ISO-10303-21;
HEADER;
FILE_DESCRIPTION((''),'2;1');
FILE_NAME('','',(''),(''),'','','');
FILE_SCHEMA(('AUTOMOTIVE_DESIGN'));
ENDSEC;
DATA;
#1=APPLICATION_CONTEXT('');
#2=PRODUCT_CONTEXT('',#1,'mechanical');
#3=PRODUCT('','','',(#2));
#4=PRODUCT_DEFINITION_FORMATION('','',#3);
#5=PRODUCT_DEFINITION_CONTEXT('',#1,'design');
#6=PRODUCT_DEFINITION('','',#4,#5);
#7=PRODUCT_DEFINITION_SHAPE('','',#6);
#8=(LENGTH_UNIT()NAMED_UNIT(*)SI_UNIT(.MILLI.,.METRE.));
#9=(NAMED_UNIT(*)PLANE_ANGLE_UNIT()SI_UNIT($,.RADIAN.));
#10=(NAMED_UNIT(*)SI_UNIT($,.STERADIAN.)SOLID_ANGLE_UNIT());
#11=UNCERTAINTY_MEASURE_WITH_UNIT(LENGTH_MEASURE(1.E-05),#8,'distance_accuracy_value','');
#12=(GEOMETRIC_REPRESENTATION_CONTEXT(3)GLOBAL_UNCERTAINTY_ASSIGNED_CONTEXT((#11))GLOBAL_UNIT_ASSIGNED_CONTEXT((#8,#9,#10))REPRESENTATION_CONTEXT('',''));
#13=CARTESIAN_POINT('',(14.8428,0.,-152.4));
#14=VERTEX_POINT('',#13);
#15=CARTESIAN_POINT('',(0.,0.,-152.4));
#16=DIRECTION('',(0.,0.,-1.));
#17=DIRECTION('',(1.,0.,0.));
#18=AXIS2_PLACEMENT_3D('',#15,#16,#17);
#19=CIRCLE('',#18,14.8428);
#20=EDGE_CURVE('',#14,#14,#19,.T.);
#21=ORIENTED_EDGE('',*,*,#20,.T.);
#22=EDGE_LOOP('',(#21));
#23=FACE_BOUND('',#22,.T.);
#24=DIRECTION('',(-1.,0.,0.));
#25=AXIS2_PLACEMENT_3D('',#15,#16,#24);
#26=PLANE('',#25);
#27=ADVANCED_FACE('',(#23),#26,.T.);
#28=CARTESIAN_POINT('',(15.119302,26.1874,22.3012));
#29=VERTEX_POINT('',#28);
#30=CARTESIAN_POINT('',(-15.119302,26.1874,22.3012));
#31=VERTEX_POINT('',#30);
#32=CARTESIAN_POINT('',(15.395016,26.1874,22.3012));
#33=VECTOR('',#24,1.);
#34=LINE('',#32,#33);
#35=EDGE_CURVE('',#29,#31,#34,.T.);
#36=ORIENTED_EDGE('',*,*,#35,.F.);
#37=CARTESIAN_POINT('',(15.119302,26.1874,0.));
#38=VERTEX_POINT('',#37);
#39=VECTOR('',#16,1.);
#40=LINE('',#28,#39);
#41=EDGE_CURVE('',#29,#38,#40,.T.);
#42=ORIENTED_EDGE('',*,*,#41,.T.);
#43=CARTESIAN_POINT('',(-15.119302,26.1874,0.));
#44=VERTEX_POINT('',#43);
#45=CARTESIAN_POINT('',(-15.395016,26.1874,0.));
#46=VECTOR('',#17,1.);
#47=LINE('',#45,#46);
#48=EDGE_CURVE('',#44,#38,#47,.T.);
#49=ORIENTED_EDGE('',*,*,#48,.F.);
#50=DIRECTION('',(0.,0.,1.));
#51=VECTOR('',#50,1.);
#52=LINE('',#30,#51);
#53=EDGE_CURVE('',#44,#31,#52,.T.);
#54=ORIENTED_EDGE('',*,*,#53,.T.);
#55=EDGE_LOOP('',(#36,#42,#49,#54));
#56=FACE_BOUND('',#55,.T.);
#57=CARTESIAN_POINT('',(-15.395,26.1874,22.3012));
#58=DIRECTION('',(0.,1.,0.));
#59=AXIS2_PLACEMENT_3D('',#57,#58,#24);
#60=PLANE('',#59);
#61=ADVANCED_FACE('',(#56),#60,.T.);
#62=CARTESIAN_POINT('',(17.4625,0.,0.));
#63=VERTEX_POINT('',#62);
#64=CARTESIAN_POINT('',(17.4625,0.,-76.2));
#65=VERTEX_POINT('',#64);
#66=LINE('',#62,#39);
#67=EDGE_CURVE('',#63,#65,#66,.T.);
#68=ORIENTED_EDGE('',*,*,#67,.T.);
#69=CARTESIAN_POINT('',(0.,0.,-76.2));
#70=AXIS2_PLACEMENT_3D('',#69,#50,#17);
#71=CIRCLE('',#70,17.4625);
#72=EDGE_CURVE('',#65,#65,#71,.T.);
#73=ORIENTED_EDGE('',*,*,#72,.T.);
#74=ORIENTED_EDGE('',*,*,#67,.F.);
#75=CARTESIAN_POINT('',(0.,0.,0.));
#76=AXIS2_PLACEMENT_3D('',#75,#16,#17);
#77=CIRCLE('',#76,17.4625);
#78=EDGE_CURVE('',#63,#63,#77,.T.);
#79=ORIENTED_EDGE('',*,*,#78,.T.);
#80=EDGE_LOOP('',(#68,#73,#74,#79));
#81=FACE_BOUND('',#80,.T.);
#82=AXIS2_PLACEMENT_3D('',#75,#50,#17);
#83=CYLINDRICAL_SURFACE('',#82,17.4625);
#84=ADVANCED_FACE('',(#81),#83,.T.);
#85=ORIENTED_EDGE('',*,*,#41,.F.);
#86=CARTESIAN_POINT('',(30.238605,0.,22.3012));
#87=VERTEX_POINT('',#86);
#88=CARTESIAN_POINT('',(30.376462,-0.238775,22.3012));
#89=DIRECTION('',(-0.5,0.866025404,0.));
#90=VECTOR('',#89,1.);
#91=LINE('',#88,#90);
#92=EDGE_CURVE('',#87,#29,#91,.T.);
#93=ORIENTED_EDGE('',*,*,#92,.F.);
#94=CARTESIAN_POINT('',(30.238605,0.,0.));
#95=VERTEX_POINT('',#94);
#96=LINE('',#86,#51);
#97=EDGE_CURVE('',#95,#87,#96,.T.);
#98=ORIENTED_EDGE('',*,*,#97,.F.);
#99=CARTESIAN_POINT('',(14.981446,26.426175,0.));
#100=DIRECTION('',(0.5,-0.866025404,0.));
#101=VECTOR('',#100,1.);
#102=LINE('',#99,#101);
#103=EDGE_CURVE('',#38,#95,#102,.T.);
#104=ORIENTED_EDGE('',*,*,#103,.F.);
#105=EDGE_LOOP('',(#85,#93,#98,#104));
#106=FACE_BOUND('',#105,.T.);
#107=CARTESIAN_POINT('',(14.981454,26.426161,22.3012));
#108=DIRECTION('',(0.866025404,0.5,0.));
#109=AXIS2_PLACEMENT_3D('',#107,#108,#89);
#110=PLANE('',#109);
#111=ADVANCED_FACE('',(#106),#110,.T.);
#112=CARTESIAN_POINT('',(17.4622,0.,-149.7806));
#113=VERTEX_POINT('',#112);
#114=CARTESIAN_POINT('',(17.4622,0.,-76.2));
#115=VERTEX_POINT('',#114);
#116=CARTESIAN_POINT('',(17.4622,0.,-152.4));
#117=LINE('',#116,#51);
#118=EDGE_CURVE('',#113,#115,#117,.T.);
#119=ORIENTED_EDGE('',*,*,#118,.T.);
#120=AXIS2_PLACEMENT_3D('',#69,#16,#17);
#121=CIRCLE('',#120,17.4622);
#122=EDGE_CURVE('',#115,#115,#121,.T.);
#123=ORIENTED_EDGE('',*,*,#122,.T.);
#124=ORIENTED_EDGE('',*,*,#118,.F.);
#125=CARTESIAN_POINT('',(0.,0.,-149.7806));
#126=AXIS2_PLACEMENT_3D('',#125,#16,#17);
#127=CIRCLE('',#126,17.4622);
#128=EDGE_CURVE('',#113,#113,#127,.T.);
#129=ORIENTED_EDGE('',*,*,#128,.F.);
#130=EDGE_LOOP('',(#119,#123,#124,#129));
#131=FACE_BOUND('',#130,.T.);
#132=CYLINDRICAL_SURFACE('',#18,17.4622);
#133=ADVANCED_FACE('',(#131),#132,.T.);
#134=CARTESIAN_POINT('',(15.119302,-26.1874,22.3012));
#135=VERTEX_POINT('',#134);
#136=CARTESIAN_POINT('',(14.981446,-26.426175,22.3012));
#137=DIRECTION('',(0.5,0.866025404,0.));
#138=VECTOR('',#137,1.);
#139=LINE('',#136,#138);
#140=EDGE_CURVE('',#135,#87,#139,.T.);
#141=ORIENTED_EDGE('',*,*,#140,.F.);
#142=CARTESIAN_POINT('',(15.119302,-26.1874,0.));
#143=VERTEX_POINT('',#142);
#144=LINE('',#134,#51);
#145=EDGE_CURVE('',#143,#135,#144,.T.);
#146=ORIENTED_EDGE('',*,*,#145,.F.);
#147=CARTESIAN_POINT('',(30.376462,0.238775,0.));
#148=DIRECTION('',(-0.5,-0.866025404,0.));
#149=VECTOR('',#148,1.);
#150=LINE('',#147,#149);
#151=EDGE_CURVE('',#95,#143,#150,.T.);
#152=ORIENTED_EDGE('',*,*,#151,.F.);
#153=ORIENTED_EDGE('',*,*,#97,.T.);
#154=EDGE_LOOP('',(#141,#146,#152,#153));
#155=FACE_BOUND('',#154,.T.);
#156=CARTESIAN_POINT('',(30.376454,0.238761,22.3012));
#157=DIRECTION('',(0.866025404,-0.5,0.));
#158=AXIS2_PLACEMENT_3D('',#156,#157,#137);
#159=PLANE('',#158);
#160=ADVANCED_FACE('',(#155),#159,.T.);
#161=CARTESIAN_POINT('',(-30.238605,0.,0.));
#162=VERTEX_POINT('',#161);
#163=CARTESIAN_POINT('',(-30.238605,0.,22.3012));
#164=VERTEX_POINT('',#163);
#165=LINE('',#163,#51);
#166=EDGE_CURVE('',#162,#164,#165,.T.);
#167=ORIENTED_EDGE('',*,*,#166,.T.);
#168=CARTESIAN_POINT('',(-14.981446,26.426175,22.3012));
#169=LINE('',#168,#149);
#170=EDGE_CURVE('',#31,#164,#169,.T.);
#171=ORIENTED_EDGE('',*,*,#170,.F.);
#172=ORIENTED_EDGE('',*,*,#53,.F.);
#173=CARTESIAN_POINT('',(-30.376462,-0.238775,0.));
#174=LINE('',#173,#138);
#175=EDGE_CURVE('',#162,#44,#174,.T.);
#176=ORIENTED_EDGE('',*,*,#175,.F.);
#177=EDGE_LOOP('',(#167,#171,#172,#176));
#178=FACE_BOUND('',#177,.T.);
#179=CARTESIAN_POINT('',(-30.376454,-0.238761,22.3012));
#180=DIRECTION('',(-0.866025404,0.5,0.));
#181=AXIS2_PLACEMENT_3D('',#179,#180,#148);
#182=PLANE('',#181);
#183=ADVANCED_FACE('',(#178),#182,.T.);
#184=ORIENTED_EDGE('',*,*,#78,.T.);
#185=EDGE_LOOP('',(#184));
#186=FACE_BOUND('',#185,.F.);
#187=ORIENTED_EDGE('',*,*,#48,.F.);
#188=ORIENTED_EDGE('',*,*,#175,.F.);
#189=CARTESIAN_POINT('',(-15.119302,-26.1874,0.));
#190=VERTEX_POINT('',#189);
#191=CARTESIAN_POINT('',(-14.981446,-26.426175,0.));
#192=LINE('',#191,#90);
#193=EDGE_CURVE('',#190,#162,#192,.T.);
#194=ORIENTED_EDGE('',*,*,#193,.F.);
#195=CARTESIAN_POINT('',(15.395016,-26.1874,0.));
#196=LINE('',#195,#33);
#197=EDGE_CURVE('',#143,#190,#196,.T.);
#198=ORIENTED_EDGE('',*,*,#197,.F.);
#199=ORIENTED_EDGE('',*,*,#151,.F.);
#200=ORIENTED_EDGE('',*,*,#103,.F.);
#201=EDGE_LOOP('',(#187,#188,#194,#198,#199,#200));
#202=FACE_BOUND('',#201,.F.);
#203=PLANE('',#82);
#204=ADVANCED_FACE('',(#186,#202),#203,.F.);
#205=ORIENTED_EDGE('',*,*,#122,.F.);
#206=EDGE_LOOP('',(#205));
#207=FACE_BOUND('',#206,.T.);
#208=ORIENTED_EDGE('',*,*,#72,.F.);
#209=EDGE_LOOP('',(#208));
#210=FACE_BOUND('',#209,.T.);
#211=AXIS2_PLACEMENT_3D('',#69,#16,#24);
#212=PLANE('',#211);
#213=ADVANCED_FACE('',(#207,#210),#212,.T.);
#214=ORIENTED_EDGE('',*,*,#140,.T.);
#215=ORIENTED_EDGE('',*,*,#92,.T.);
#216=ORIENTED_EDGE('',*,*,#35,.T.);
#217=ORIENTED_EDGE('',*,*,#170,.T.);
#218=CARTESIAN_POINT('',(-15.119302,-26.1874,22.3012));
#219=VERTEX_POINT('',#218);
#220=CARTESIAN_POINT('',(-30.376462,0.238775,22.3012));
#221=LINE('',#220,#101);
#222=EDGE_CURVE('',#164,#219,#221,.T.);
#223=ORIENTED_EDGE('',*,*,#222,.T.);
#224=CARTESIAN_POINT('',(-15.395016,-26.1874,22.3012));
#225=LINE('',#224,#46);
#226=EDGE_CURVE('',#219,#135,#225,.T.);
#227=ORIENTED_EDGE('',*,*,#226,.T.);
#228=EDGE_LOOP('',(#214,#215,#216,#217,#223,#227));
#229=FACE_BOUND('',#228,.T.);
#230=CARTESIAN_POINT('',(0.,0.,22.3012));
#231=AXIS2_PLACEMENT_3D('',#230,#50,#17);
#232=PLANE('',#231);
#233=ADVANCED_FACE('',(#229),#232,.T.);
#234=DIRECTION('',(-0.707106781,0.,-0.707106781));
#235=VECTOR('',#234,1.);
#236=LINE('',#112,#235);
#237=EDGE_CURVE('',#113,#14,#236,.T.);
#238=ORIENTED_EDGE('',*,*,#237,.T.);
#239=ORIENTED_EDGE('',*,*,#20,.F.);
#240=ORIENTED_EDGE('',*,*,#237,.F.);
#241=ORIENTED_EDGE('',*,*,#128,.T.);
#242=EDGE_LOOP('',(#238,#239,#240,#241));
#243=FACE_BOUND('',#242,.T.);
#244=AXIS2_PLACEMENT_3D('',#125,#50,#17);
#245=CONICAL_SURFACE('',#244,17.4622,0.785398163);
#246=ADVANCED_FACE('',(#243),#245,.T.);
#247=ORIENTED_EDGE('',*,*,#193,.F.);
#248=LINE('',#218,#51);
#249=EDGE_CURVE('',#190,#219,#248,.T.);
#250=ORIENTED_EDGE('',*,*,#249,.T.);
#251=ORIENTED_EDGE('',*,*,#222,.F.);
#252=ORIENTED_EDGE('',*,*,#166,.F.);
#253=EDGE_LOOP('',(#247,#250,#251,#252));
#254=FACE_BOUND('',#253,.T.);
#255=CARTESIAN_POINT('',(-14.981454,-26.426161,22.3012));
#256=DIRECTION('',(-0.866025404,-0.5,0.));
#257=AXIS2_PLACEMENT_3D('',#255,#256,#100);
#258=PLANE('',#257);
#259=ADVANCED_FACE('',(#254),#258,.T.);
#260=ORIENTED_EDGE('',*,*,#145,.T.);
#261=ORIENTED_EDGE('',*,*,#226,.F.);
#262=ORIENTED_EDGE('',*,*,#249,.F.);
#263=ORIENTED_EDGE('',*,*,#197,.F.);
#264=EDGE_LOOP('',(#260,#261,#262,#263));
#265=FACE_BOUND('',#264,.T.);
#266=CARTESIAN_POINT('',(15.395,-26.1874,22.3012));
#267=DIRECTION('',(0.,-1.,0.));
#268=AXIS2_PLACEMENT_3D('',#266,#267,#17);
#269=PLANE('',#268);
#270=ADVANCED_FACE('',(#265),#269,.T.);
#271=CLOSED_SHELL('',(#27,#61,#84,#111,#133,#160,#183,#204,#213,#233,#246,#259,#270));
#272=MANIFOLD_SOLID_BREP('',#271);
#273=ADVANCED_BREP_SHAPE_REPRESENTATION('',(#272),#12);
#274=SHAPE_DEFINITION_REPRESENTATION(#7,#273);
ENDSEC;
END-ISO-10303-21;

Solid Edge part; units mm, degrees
sketch "Sketch1" plane through (0, 0, 0) normal (0, 0, 1) x (1, 0, 0)
  circle A0 centre (0, 0) radius 30.3774
  dimension "D1" = 60.7548
extrude "Protrusion1" add sketch "Sketch1" along normal blind 22.3012
sketch "Sketch2" plane through (0, 0, 0) normal (0, 0, -1) x (1, 0, 0)
  circle A0 centre (0, 0) radius 17.4625
extrude "Protrusion2" add sketch "Sketch2" along normal blind 152.4
sketch "Sketch3" plane through (0, 0, -152.4) normal (0, 0, -1) x (1, 0, 0)
  circle A0 centre (0, 0) radius 17.4622
extrude "Cutout1" cut sketch "Sketch3" against normal blind 76.2 flip side to cut
chamfer "Chamfer_1" distance 2.6194 angle 45 1 edges at (-17.4622, 0, -152.4)
sketch "Sketch4" plane through (0, 0, 22.3012) normal (0, 0, 1) x (1, 0, 0)
  line L0 (-15.395, 26.1874) -> (15.395, 26.1874)
  dimension "D1" = 52.3748
extrude "Cutout2" cut sketch "Sketch4" against normal up to next material side at (0, 26.2374, 22.3012)
pattern_circular "Pattern1" count 6 over 360 about axis through (0, 0, 22.3012) along (0, 0, 1) of "Cutout2"
properties part number "24106416"
